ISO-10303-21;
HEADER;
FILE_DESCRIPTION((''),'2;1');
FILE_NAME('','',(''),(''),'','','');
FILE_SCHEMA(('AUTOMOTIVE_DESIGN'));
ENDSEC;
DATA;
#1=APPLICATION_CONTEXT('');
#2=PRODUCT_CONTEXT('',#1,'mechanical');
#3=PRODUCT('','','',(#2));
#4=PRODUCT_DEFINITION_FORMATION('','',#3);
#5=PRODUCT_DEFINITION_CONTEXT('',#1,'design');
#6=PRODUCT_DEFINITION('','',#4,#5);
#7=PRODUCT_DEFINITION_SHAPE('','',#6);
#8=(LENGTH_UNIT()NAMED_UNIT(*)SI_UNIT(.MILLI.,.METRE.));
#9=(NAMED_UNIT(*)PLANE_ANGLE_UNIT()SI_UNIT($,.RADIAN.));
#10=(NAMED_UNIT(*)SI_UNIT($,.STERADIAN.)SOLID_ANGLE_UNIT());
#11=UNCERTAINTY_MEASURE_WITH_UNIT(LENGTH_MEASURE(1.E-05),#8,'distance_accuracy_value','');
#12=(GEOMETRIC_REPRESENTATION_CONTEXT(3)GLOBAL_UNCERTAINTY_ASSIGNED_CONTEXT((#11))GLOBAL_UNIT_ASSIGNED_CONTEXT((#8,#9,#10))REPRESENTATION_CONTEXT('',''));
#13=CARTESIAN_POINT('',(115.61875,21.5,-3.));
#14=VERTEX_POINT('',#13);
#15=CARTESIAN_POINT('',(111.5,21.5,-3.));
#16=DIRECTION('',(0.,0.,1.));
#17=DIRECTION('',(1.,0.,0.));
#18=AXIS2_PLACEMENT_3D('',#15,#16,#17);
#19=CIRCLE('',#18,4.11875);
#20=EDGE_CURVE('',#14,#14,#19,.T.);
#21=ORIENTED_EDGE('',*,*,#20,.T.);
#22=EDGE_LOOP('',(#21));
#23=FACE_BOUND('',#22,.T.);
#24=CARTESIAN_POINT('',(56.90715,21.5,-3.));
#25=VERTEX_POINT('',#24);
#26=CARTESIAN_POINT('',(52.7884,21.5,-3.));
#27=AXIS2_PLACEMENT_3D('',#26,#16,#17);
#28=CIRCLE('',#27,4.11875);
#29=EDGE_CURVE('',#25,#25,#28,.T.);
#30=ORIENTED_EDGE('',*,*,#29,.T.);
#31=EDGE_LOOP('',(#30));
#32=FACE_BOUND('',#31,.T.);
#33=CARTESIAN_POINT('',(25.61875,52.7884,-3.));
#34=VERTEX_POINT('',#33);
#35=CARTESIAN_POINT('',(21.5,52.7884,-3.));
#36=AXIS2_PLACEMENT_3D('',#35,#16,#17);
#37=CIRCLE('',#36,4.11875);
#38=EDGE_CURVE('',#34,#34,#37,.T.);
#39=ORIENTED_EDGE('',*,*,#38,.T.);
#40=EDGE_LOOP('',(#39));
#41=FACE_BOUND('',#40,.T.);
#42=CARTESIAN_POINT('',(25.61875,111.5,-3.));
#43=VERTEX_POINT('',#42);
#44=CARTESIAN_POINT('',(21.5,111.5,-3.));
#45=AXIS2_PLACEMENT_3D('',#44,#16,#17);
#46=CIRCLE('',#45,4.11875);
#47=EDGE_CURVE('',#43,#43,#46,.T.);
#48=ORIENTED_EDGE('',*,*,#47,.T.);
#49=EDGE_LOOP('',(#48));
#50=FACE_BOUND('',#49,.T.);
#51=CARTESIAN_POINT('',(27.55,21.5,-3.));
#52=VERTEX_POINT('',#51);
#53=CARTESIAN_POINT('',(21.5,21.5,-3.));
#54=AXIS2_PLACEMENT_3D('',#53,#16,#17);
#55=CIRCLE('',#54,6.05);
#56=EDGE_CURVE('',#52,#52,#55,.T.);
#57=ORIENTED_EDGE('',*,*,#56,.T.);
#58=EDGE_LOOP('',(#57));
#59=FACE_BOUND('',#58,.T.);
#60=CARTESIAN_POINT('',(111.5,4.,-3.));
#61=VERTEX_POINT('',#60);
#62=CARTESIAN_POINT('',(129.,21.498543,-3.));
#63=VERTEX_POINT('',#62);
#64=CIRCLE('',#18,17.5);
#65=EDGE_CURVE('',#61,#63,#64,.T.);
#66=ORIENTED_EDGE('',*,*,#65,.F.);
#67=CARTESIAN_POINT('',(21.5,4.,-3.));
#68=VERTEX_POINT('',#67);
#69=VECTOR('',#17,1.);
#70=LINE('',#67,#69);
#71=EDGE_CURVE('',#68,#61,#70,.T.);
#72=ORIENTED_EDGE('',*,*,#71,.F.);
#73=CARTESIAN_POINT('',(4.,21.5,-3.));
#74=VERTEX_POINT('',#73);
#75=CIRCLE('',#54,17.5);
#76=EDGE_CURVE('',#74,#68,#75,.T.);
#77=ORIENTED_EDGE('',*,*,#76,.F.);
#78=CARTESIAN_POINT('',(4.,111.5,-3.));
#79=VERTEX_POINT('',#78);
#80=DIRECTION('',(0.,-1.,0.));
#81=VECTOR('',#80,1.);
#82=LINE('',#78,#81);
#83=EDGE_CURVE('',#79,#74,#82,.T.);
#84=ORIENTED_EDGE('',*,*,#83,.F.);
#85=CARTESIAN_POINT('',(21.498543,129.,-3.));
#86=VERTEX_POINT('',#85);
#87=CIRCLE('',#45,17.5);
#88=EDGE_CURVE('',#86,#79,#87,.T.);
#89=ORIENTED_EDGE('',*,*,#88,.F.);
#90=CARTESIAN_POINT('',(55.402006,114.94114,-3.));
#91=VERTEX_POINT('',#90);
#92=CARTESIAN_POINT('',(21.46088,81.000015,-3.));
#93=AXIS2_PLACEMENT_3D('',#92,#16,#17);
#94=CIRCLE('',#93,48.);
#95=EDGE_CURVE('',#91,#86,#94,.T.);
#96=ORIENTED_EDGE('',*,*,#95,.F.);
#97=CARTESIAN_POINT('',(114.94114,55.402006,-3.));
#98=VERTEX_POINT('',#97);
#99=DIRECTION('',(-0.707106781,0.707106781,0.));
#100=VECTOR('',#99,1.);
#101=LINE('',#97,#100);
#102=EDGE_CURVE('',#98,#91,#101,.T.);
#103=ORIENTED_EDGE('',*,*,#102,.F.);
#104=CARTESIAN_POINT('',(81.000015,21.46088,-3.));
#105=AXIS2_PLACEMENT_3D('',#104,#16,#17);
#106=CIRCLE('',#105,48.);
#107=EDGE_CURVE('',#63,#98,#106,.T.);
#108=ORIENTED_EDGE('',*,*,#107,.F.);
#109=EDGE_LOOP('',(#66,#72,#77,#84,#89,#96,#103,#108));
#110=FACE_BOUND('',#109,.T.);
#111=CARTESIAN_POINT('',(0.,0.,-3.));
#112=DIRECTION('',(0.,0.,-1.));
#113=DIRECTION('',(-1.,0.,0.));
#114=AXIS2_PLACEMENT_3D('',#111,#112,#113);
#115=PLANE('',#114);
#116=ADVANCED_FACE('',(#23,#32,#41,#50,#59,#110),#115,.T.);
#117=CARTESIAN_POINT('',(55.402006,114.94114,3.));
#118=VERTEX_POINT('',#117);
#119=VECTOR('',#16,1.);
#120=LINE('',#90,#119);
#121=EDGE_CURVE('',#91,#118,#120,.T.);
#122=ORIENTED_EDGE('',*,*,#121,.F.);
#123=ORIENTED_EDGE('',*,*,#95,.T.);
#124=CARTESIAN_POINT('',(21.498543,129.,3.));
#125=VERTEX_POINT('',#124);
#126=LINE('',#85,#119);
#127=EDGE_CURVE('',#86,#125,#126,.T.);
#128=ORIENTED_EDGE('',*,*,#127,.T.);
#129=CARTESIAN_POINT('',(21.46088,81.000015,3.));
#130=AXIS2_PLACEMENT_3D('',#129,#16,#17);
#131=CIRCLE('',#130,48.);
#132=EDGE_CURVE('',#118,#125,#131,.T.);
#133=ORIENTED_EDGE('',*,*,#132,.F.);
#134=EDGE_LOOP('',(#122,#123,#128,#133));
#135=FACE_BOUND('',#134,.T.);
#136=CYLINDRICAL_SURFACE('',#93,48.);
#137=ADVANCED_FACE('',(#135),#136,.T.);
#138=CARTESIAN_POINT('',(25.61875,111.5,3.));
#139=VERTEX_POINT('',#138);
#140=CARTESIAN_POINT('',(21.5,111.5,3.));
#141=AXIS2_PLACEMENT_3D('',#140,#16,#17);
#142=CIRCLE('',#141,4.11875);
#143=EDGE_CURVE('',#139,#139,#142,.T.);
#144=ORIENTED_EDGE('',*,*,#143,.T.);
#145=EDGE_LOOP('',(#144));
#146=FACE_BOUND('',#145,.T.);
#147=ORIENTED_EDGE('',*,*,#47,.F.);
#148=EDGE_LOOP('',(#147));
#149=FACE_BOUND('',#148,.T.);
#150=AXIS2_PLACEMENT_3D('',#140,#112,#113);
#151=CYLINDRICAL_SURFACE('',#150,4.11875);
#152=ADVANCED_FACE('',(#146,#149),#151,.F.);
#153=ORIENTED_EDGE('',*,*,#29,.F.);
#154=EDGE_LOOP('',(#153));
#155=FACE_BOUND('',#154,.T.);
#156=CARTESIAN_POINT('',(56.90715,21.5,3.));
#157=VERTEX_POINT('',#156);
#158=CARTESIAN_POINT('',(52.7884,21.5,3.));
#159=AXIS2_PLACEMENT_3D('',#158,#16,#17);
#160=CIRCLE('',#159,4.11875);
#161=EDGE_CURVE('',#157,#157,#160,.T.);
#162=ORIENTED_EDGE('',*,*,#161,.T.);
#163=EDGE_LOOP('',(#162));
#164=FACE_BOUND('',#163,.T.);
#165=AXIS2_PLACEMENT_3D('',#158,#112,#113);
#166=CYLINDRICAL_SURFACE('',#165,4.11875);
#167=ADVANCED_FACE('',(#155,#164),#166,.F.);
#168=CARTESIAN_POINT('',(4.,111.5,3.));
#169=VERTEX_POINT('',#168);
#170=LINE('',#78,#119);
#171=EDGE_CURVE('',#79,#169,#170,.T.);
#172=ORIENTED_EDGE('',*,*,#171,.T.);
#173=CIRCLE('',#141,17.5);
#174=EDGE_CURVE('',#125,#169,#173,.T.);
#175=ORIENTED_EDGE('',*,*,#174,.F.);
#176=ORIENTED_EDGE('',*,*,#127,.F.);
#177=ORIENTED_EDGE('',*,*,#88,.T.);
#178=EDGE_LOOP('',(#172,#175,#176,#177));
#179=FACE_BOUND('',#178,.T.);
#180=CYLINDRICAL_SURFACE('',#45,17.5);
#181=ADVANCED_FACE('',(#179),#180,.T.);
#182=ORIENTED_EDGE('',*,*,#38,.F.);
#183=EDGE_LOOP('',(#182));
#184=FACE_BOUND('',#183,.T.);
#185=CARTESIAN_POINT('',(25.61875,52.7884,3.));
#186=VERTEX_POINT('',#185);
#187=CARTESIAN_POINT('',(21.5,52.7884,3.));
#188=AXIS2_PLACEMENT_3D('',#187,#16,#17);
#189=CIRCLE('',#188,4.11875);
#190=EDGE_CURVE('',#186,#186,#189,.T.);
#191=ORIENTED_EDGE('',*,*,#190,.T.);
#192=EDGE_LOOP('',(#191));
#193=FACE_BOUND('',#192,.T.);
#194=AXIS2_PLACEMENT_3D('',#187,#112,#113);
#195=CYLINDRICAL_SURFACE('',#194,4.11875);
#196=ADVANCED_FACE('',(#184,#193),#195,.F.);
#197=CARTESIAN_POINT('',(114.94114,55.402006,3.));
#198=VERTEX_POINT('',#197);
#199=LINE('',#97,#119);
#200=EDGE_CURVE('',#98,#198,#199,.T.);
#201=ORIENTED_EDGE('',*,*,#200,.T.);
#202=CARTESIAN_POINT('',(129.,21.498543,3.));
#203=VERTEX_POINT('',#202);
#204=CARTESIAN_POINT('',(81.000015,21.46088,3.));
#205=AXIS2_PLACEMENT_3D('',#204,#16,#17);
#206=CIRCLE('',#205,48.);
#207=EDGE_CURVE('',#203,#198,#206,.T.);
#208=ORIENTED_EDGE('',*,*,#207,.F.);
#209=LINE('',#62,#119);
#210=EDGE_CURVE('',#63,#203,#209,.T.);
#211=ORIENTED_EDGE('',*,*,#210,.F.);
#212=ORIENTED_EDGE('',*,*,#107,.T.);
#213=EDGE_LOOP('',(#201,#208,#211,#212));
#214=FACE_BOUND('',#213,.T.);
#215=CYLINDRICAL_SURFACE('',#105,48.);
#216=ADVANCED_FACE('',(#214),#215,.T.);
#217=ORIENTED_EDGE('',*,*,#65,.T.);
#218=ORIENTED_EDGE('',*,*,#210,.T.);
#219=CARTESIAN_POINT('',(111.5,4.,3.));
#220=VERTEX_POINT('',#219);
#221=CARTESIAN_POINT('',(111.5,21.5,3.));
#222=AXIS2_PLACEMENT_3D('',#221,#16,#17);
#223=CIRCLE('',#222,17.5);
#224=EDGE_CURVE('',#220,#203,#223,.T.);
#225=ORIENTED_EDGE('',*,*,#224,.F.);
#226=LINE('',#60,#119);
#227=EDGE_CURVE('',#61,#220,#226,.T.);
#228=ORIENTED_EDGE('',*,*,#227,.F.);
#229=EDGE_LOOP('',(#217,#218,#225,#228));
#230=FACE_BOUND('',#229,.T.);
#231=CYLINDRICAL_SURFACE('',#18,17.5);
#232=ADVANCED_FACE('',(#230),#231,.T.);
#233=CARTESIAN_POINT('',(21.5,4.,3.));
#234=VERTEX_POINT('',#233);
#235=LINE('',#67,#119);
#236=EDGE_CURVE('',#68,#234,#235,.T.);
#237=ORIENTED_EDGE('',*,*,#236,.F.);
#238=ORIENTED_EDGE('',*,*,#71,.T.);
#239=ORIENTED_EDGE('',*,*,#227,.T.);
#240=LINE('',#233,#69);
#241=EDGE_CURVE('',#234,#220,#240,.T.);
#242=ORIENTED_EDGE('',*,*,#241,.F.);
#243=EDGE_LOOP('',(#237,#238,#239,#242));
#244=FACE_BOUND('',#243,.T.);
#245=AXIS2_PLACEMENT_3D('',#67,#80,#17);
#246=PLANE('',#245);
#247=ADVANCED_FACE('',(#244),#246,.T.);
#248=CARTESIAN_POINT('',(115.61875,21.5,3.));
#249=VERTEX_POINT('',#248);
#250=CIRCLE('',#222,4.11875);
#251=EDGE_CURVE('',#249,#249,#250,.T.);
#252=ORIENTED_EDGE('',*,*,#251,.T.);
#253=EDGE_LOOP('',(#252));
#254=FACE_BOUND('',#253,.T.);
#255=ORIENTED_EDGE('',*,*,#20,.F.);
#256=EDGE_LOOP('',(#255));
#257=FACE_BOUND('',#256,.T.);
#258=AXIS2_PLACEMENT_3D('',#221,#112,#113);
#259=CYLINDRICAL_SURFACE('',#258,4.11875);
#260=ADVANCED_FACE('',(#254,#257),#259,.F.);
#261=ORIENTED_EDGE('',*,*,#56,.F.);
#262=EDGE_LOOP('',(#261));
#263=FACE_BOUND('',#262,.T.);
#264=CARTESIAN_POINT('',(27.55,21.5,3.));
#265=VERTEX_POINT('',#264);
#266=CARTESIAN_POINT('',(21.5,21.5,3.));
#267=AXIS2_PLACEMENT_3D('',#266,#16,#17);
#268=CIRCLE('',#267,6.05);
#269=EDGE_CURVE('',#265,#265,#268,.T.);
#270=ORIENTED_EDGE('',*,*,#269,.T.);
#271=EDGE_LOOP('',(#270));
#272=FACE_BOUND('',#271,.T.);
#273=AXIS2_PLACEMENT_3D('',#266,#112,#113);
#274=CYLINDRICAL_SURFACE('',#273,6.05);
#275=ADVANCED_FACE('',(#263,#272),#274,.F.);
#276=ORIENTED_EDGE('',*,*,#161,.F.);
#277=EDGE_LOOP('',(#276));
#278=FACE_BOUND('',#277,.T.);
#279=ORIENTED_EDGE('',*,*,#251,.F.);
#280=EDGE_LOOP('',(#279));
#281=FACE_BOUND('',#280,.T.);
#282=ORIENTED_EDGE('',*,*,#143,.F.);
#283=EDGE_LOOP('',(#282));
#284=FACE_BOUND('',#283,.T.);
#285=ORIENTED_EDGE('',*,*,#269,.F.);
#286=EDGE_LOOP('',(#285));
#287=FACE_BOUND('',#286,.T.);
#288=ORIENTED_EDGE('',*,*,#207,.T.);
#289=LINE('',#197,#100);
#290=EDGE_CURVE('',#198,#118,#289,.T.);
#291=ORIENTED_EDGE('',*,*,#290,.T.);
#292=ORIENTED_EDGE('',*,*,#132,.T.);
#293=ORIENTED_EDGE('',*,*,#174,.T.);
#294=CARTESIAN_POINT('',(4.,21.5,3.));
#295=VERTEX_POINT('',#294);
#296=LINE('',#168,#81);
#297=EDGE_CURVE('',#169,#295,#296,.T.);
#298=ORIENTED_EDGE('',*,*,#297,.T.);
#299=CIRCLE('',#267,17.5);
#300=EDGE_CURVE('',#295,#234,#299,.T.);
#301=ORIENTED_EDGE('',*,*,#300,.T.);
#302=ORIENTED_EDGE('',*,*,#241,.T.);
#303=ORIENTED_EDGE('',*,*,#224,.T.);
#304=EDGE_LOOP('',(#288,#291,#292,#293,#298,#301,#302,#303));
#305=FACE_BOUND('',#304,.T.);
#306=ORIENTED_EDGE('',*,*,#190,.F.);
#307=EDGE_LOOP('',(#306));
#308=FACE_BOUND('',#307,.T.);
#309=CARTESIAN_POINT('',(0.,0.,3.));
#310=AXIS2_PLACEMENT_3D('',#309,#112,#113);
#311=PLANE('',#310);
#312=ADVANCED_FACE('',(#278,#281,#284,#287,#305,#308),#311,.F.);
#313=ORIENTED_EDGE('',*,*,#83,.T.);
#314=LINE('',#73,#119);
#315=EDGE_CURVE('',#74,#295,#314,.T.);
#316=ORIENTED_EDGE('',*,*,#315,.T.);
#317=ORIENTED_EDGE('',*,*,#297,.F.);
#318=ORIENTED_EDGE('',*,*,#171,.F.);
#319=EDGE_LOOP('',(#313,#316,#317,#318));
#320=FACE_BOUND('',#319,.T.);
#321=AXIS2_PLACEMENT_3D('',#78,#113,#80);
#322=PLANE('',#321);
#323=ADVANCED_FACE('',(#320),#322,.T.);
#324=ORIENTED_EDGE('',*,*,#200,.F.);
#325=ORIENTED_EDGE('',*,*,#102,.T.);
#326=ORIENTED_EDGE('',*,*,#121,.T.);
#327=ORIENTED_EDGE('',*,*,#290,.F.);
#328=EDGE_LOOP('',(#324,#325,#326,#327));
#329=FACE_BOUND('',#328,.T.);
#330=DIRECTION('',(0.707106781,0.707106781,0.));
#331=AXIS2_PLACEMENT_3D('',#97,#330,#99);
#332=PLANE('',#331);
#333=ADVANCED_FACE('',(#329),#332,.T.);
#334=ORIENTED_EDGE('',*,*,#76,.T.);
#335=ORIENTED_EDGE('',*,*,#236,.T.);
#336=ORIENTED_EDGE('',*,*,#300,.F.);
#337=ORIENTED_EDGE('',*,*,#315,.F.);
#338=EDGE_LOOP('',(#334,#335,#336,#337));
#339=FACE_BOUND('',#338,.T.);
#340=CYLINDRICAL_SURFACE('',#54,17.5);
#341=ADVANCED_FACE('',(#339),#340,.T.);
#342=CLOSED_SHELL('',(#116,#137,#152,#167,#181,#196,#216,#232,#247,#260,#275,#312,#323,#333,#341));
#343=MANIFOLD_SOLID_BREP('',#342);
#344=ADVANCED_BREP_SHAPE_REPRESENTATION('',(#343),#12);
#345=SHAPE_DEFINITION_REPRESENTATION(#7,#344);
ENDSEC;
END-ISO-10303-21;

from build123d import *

# Parameters (mm, degrees)
SKETCH1_R           = 6.049999999999999
SKETCH1_R_2         = 4.118749999999998
SKETCH1_R_3         = 4.118750000000009
SKETCH1_R_4         = 4.118750000000003
SKETCH1_R_5         = 4.11875000000001
BOSS_EXTRUDE1_DEPTH = 3
FILLET1_R           = 21.5
FILLET2_R           = 52
CUT_EXTRUDE1_DEPTH  = 189.18607812481773


with BuildPart() as part:
    # Sketch1 → Boss-Extrude1 (new, symmetric)
    with BuildSketch(Plane.XY):
        Polygon((0, 0), (0, 133), (42.999999999999986, 133), (133, 42.99999999999999), (133, 9.06e-15), align=None)
        with Locations((21.5, 21.499999999999993)):
            Circle(SKETCH1_R, mode=Mode.SUBTRACT)
        with Locations((21.5, 111.50000000000001)):
            Circle(SKETCH1_R_2, mode=Mode.SUBTRACT)
        with Locations((111.50000000000001, 21.5)):
            Circle(SKETCH1_R_3, mode=Mode.SUBTRACT)
        with Locations((21.5, 52.78839999999999)):
            Circle(SKETCH1_R_4, mode=Mode.SUBTRACT)
        with Locations((52.788399999999996, 21.499999999999986)):
            Circle(SKETCH1_R_5, mode=Mode.SUBTRACT)
    extrude(amount=BOSS_EXTRUDE1_DEPTH, both=True)

    # Fillet1
    fillet1_edges = [part.edges().sort_by_distance(p)[0] for p in [
        (0, 0, 0),
        (0, 133, 0),
        (133, 9.06e-15, 0),
    ]]
    fillet(fillet1_edges, radius=FILLET1_R)

    # Fillet2
    # the kernel refuses this fillet: 52 mm, written as the material it takes off along each edge
    with BuildSketch(Plane(origin=(133, 43, -56.84767436170304), x_dir=(-0.7071067811865476, 0.7071067811865476, 0), z_dir=(0, 0, 1))) as fillet2_piece_1:
        with BuildLine():
            CenterArc((21.539069744681207, 52.00000000000001), FILLET2_R, 225.07350833515432, 44.926491664845685)
            Line((-15.183278672480162, 15.183303696167892), (-18.855513514196304, 11.501634065784673))
            ThreePointArc((-18.855513514196304, 11.501634065784673), (-18.87975105768081, 11.52584053334073), (-3.6769552621700394, -3.6769552621700394))
            Line((-3.6769552621700394, -3.6769552621700394), (-4.9e-15, -5.200000000000005))
            Line((-4.9e-15, -5.200000000000005), (21.539069744681218, -5.199999999999996))
            Line((21.539069744681218, -5.199999999999996), (21.539069744681214, 4.7e-16))
        make_face()
    extrude(amount=113.69534872340608, mode=Mode.SUBTRACT)
    with BuildSketch(Plane(origin=(42.999999999999986, 133, 56.847674361702985), x_dir=(-0.9999999999996605, -8.240534738615283e-07, 0), z_dir=(0, 0, -1))) as fillet2_piece_2:
        with BuildLine():
            CenterArc((21.539173195539043, -51.9999571492017), FILLET2_R, 90.07355554994047, 44.926491664845685)
            Line((-15.230409726226513, -15.230434827591285), (-18.90736801840307, -11.55348259543025))
            Line((-18.90736801840307, -11.55348259543025), (-3.676958292176556, 3.6769522321610486))
            Line((-3.676958292176556, 3.6769522321610486), (-4.28507806408e-06, 5.199999999998223))
            ThreePointArc((-4.28507806408e-06, 5.199999999998223), (21.499995714914625, 5.200017717147912), (21.46574062621809, 5.1999957149201785))
            Line((21.46574062621809, 5.1999957149201785), (21.472416314338172, 0))
        make_face()
    extrude(amount=113.69534872340597, mode=Mode.SUBTRACT)

    # Sketch2 → Cut-Extrude1 (cut, through all)
    with BuildSketch(Plane.XY.offset(3)):
        with BuildLine():
            Line((117.76956733680983, 58.23043266319015), (58.23043266319017, 117.76956733680981))
            ThreePointArc((58.23043266319017, 117.76956733680981), (41.3784881824358, 129.03426172642116), (21.499999999999996, 133))
            ThreePointArc((21.499999999999996, 133), (6.2972042044892405, 126.70279579551078), (3.47e-15, 111.50000000000001))
            Line((3.47e-15, 111.50000000000001), (0, 21.5))
            ThreePointArc((0, 21.5), (6.297204204489223, 6.297204204489235), (21.49999999999999, 3.47e-15))
            Line((21.49999999999999, 3.47e-15), (111.50000000000001, 1.041e-14))
            ThreePointArc((111.50000000000001, 1.041e-14), (126.70279579551078, 6.297204204489239), (133, 21.500000000000007))
            ThreePointArc((133, 21.500000000000007), (129.03426172642114, 41.37848818243579), (117.76956733680983, 58.23043266319015))
        make_face()
        with BuildLine():
            Line((114.94114021206362, 55.40200553844396), (55.402005538443966, 114.94114021206363))
            ThreePointArc((55.402005538443966, 114.94114021206363), (39.84708125964561, 125.33902242576387), (21.49854269401705, 128.9999999393217))
            ThreePointArc((21.49854269401705, 128.9999999393217), (9.12511610449009, 123.87385342456624), (4.0000000000000036, 111.50000000000001))
            Line((4.0000000000000036, 111.50000000000001), (4, 21.500000000000004))
            ThreePointArc((4, 21.500000000000004), (9.125631329235414, 9.125631329235425), (21.499999999999996, 4.0000000000000036))
            Line((21.499999999999996, 4.0000000000000036), (111.50000000000001, 4.000000000000011))
            ThreePointArc((111.50000000000001, 4.000000000000011), (123.8738534245646, 9.125116104488455), (128.9999999393217, 21.49854269401244))
            ThreePointArc((128.9999999393217, 21.49854269401244), (125.33902242576474, 39.847081259643474), (114.94114021206362, 55.40200553844396))
        make_face(mode=Mode.SUBTRACT)
    extrude(amount=-CUT_EXTRUDE1_DEPTH, mode=Mode.SUBTRACT)


with BuildPart() as cut_extrude1_kept_piece:
    # of the separate pieces the step leaves, the one the design keeps (cut_extrude1_pieces_kept)
    add(part.part.solids().sort_by_distance((128.999999939, 21.498542694, -3))[0])


solid = cut_extrude1_kept_piece.part
